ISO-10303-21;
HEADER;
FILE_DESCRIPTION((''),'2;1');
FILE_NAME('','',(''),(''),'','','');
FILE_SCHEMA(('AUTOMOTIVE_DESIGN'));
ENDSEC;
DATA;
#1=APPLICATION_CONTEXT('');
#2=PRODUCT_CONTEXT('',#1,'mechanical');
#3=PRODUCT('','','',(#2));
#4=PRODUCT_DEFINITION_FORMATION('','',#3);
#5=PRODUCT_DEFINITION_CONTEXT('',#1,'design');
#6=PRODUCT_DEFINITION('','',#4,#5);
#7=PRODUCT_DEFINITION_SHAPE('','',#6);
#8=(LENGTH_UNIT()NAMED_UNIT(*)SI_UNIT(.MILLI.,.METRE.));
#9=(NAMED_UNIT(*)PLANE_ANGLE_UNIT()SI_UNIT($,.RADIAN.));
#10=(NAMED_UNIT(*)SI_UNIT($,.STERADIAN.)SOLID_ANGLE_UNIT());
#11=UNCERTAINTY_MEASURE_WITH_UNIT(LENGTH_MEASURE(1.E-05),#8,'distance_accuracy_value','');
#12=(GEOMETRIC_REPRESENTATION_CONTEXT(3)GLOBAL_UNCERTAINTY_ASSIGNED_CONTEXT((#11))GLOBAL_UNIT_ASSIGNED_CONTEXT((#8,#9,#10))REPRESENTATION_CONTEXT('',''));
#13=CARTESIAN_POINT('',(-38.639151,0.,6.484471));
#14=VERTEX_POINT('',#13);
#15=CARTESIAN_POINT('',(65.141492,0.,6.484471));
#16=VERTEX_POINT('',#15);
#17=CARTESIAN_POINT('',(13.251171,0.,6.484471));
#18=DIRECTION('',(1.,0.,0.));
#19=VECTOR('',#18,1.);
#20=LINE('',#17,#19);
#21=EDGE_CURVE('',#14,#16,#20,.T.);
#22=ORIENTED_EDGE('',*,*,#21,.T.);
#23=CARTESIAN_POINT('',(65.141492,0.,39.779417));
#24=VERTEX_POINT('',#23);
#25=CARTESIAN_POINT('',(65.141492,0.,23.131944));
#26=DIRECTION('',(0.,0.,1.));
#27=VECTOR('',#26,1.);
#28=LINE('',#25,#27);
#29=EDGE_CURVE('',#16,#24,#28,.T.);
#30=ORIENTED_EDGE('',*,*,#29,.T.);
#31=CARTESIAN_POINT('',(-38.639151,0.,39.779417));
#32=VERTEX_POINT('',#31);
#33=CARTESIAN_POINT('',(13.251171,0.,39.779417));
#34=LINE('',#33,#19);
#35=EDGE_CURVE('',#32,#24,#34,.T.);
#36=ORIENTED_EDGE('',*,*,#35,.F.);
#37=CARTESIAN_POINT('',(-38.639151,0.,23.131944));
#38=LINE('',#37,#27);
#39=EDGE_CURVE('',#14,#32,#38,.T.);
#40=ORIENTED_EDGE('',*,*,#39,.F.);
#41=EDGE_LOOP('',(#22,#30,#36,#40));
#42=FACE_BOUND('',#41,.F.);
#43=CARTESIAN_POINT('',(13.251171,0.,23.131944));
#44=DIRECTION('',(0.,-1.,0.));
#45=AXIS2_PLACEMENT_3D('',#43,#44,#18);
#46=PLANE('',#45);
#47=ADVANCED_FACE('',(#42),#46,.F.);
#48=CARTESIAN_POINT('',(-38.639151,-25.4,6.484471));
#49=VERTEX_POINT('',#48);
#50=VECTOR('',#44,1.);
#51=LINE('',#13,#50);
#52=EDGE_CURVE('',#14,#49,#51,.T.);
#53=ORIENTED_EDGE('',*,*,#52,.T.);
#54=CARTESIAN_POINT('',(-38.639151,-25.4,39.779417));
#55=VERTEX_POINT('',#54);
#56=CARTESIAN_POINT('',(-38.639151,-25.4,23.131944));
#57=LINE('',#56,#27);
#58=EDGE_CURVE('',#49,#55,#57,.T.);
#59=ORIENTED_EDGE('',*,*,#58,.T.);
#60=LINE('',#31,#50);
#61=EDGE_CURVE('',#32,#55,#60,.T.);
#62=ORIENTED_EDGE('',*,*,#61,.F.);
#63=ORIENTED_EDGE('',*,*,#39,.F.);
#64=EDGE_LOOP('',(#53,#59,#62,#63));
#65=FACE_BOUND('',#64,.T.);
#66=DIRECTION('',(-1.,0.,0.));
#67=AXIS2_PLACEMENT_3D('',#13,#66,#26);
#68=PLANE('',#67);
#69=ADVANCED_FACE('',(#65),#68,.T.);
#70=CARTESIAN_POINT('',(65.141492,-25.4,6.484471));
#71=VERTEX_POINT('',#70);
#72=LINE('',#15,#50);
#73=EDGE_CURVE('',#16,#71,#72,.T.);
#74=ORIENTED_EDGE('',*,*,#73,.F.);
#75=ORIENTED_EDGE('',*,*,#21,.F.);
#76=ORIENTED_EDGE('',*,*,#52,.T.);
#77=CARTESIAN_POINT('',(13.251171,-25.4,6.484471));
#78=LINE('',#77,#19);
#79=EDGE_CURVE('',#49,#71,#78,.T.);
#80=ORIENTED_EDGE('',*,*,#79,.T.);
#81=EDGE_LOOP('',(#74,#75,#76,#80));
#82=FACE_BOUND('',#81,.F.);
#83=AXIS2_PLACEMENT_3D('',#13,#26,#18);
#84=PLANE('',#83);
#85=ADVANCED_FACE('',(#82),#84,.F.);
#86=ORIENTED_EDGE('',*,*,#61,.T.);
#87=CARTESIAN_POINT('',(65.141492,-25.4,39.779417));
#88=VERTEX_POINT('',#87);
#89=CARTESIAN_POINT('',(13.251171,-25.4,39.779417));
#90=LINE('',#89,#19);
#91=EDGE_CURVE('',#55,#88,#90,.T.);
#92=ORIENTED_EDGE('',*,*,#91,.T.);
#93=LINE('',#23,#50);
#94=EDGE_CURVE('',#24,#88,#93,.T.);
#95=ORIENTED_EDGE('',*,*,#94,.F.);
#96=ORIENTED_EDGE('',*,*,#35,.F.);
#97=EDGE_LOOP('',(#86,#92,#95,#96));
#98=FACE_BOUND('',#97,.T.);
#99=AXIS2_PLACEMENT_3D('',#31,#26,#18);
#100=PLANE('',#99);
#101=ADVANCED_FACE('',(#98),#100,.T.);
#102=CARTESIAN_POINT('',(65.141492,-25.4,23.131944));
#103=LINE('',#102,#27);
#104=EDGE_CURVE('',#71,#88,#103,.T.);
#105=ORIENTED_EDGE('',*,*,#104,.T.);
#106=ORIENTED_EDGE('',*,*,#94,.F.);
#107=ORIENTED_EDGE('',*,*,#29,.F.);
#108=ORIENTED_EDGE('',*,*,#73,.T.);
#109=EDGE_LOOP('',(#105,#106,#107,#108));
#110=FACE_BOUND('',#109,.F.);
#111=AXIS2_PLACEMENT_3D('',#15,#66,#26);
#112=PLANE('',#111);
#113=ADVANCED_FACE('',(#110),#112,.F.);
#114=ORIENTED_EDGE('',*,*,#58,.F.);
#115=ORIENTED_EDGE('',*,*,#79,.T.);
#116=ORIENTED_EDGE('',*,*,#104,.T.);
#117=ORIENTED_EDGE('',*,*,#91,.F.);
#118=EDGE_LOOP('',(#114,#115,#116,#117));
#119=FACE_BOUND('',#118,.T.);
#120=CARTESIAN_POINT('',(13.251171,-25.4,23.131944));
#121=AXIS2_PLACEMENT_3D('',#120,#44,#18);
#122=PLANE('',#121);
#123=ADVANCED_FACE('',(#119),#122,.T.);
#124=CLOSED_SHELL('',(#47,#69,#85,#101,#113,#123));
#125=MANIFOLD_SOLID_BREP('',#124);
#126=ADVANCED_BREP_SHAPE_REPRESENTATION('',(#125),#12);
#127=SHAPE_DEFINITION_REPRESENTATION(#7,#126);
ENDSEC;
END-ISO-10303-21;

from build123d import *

# Parameters (mm, degrees)
F0_W     = 103.7806421518
F0_H     = 33.2949464209
F1_DEPTH = 25.4


# Not quite as in the source:
# - a feature names something its author has since deleted; it is built from what else it names


with BuildPart() as f1:
    # F0 (on Front) → F1 (new body)
    with BuildSketch(Plane.XZ):
        with Locations((13.251170516, 23.1319440063)):
            Rectangle(F0_W, F0_H)
    extrude(amount=F1_DEPTH)


solid = f1.part
